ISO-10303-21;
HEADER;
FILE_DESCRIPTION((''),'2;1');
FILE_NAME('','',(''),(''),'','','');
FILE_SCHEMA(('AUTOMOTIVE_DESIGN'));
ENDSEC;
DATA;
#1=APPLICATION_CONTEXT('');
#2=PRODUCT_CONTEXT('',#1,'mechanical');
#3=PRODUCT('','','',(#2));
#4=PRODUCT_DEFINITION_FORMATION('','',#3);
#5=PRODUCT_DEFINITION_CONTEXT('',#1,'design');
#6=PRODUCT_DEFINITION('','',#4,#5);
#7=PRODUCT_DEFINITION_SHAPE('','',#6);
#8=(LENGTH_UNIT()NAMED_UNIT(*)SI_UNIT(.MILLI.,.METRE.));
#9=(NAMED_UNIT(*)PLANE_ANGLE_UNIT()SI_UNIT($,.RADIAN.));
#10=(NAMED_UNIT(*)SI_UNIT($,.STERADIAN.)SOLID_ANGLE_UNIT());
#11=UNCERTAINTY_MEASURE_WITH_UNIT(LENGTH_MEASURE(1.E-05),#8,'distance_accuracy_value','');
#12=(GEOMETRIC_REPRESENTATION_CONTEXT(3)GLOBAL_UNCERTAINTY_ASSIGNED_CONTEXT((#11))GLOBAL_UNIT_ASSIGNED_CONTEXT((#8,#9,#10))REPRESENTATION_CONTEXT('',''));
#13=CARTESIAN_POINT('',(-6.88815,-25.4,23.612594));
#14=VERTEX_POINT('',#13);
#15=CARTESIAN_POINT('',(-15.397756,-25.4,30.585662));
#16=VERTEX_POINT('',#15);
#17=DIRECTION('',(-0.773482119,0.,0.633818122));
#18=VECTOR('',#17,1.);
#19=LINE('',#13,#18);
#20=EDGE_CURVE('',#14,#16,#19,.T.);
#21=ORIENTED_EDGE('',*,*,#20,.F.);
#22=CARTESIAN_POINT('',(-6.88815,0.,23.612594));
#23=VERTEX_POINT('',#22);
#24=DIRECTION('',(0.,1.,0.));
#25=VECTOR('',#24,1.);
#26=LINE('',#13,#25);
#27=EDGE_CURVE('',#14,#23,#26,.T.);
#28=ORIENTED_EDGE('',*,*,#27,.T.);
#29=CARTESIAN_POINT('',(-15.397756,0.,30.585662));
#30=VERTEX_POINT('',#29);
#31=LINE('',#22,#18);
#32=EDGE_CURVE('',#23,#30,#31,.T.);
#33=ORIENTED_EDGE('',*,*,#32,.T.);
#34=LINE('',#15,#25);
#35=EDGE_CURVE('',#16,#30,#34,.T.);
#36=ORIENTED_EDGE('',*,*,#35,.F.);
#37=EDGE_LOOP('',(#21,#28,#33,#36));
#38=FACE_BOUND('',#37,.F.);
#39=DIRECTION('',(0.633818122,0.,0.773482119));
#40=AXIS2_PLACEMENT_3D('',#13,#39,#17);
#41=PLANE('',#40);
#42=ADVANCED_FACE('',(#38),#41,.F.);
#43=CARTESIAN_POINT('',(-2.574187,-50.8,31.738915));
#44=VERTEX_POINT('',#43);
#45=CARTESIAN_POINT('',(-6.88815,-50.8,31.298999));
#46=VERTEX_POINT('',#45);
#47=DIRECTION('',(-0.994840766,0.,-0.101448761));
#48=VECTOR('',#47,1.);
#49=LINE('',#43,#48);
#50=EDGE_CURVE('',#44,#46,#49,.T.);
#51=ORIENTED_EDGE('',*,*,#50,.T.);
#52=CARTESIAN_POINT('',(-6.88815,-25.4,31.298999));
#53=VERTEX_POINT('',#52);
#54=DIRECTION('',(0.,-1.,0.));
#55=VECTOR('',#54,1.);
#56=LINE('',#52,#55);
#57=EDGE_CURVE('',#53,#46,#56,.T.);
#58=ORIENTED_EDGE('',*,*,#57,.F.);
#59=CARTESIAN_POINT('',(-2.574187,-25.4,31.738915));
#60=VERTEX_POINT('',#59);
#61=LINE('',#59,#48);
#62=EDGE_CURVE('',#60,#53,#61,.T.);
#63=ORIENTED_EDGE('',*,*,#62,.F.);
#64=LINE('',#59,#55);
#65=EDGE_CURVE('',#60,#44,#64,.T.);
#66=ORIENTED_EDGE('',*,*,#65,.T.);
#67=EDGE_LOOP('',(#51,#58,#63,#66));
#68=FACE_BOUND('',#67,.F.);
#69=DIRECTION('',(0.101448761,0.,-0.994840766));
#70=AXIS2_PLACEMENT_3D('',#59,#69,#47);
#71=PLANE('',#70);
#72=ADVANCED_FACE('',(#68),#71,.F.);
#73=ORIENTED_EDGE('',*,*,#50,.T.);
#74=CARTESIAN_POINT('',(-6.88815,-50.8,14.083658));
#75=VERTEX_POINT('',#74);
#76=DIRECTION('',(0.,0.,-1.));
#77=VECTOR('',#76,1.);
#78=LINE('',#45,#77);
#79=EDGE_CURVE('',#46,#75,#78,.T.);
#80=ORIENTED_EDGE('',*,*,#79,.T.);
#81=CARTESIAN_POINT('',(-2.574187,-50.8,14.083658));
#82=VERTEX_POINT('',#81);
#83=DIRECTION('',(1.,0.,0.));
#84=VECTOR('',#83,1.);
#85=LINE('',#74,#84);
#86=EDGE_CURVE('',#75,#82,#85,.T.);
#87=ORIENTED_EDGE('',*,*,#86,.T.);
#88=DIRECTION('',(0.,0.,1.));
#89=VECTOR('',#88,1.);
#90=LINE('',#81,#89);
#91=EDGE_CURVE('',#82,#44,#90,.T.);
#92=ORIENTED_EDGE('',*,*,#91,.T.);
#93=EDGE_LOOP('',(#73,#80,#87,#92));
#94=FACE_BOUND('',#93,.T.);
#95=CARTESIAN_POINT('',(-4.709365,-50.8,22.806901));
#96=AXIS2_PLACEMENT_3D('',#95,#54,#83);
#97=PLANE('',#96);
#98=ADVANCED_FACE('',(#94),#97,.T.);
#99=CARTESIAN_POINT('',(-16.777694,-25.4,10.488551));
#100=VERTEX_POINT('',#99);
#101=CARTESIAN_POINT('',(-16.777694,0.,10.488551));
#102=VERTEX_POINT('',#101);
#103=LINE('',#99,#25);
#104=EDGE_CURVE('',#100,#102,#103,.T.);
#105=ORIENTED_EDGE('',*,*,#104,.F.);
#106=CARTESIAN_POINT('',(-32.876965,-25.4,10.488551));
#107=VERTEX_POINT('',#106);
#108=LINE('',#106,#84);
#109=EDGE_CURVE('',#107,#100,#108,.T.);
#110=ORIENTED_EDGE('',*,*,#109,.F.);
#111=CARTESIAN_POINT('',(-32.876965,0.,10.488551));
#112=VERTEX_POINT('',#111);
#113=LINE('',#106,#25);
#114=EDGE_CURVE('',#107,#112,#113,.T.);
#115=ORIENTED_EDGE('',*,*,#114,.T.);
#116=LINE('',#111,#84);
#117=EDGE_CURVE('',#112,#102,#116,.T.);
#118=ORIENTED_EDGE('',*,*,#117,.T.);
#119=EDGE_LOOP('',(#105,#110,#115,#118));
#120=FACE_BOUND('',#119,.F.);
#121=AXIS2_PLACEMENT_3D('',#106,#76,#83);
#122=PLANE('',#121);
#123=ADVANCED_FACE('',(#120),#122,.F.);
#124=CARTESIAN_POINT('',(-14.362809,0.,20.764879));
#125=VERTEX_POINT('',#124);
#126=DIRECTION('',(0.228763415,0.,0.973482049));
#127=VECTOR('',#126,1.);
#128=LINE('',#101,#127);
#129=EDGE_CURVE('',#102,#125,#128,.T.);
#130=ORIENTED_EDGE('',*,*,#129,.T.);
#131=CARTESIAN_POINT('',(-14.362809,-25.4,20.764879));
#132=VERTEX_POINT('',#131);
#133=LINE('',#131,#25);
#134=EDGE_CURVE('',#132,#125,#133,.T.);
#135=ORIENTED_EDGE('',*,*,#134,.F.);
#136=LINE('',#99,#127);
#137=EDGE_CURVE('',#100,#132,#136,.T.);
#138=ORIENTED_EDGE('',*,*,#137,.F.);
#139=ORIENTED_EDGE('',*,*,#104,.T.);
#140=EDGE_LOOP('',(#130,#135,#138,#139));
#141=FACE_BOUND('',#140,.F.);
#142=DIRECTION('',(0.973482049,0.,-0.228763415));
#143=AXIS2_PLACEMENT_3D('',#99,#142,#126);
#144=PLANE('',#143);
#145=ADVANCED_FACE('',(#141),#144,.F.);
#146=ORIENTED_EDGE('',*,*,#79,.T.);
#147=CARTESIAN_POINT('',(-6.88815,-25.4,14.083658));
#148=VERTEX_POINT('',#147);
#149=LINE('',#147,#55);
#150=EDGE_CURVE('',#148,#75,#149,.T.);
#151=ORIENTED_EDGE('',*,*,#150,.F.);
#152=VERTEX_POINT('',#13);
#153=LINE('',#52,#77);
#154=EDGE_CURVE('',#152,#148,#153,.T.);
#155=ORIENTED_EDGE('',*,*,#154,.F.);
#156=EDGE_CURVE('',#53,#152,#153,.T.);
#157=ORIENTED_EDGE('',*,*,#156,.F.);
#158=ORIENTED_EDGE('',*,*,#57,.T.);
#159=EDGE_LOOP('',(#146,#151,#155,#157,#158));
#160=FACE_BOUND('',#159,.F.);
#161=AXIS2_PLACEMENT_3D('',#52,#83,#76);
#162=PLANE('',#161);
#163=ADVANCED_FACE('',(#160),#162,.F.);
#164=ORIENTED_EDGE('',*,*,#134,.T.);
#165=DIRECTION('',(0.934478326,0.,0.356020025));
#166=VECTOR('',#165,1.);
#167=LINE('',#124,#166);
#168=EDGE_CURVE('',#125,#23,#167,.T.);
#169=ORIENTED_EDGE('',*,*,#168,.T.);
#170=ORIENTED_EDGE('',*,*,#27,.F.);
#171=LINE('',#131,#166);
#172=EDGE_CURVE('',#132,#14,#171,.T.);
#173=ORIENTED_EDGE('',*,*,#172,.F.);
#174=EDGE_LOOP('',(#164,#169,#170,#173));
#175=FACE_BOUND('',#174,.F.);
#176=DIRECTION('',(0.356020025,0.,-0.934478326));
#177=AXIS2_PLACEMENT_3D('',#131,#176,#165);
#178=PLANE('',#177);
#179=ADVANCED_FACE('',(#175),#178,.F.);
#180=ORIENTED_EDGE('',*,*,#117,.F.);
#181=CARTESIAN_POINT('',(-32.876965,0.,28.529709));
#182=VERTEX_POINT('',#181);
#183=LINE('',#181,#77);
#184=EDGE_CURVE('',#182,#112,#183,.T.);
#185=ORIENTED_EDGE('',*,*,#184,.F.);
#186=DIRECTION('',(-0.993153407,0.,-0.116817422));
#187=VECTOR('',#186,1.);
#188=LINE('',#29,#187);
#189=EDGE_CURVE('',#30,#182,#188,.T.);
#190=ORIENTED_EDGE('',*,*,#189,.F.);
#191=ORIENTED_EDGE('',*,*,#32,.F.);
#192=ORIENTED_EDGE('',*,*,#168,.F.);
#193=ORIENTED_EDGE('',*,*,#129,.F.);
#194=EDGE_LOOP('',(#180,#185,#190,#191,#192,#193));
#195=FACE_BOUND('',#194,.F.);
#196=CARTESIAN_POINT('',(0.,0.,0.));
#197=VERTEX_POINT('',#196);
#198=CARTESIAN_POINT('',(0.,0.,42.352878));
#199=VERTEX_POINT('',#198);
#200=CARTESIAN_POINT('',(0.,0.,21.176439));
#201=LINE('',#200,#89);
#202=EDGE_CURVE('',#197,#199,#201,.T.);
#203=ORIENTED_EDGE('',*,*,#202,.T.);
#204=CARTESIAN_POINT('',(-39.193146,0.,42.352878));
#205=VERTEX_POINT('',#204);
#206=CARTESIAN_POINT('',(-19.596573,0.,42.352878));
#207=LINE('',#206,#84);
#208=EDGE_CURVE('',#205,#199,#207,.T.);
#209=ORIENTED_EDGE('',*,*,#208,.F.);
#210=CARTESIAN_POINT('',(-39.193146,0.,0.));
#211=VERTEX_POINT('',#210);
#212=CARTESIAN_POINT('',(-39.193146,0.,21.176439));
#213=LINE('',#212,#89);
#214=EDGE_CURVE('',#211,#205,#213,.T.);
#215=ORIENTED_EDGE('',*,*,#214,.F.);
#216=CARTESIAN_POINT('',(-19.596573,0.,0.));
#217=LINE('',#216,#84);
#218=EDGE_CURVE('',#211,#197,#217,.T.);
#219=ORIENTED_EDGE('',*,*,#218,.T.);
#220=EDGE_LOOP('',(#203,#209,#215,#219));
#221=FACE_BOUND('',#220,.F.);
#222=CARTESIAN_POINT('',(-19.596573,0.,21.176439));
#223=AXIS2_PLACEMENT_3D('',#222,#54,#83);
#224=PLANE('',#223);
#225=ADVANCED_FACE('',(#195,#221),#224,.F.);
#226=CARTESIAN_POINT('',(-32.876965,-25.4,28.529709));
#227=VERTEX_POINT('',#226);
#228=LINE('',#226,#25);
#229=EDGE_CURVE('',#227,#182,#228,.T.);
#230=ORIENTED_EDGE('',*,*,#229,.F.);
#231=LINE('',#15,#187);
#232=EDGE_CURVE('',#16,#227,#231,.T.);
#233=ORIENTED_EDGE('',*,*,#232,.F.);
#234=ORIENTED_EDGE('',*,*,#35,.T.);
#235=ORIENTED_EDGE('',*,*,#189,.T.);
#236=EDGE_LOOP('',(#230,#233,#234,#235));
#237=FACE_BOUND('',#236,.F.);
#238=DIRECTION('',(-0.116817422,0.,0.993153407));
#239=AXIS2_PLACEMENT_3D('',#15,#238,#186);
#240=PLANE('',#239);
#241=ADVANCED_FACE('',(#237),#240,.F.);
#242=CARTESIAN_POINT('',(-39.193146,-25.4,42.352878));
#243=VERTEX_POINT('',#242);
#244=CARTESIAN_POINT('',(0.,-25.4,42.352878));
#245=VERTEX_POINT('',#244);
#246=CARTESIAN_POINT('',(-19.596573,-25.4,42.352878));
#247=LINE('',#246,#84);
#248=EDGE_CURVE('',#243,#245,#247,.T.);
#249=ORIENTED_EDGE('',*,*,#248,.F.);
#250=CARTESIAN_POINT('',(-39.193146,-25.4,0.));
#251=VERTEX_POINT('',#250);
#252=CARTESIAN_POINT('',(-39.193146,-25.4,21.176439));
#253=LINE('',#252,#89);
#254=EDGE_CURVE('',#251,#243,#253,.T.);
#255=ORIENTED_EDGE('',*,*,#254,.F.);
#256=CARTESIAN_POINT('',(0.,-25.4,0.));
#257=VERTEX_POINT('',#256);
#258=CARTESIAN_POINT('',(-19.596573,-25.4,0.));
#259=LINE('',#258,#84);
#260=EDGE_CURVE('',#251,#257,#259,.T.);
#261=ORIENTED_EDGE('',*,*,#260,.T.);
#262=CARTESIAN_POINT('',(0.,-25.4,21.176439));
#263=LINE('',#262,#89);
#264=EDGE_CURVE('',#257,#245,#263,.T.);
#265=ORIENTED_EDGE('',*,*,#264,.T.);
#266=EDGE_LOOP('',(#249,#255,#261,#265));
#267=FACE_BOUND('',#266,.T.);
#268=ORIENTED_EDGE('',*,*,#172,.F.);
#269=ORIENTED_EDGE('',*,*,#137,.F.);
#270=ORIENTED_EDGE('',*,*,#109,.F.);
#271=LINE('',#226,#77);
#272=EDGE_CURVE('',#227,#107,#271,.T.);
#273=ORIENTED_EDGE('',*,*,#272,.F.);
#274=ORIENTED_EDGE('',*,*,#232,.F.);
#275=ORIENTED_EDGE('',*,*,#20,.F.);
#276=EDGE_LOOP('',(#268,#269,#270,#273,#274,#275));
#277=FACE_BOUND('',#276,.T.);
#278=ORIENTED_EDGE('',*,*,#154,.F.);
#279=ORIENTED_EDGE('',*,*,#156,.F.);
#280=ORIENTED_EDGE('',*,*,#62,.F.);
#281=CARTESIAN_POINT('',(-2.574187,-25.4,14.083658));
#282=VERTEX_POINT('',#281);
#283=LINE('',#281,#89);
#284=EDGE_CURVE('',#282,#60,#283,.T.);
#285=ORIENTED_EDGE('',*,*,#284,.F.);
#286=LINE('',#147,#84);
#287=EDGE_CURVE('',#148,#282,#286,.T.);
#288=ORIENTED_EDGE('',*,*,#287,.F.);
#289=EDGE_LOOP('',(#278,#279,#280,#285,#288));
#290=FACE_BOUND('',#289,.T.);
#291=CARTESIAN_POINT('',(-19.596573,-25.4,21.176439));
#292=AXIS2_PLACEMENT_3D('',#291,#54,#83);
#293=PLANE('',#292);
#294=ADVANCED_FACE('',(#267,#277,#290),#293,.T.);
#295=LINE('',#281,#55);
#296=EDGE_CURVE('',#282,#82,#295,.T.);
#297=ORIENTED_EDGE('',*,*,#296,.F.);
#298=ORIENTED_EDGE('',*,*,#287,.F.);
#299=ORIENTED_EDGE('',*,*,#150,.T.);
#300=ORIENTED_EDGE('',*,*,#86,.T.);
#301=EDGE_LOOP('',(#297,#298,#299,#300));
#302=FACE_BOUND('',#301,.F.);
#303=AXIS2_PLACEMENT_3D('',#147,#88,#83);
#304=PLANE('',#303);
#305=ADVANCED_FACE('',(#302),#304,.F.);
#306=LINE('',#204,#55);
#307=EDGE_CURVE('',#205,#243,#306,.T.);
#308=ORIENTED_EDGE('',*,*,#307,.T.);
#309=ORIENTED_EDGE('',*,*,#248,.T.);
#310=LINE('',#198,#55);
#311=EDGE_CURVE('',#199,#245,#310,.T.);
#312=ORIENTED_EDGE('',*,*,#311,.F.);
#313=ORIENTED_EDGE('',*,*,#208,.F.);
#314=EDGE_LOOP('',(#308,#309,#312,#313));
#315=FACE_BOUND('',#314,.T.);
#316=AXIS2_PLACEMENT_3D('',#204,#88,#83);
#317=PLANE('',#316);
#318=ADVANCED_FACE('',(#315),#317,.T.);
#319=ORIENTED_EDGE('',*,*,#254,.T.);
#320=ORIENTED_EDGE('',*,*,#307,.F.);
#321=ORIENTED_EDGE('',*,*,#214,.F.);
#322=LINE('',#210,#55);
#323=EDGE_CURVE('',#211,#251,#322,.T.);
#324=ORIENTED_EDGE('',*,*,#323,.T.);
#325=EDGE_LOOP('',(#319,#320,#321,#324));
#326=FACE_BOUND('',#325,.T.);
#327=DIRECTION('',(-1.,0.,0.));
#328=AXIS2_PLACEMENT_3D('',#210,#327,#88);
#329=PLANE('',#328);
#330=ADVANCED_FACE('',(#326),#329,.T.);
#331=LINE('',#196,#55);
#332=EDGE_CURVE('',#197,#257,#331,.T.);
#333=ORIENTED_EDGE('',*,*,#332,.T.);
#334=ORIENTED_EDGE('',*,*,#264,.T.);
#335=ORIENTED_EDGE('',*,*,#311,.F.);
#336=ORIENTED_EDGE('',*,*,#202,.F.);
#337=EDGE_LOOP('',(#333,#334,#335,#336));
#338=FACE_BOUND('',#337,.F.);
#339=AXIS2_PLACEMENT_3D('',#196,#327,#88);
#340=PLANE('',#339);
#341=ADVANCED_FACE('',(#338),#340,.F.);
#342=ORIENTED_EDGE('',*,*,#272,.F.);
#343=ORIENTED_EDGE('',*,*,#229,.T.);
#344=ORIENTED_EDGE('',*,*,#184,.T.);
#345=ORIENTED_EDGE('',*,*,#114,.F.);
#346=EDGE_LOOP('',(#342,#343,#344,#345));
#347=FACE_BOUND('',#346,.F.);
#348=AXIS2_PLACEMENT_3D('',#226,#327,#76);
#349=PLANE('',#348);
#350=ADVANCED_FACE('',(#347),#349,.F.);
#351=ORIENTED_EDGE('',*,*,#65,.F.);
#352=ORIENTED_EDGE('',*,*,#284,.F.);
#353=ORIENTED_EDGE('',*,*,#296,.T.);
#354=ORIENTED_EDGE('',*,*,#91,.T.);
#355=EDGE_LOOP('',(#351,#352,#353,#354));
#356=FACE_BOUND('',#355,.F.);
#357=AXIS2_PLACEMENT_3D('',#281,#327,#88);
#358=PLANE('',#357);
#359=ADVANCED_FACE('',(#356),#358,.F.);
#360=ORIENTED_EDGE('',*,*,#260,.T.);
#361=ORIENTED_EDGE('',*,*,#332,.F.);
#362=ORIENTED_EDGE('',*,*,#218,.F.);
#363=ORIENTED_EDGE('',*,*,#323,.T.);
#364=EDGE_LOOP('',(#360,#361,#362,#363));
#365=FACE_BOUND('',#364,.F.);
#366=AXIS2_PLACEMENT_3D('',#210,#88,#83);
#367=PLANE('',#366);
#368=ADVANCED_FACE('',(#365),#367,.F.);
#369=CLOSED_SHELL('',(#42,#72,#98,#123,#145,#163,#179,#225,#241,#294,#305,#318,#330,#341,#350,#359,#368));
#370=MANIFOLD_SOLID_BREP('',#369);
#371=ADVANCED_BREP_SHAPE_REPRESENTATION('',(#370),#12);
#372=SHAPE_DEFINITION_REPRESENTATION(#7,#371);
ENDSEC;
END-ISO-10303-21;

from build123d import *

# Parameters (mm, degrees)
F0_W     = 39.1931459308
F0_H     = 42.3528775573
F1_DEPTH = 25.4
F3_DEPTH = 25.4
F5_DEPTH = 25.4


# Not quite as in the source:
# - ends of sketch curves that miss each other by under 0.0002 mm in the source are joined
# - a feature of the source that left no trace in its solid (it failed there, or was rolled back) is left out


with BuildPart() as f1:
    # F0 (on Front) → F1 (new body)
    with BuildSketch(Plane.XZ):
        with Locations((-19.5965729654, 21.1764387786)):
            Rectangle(F0_W, F0_H)
    extrude(amount=F1_DEPTH)

    # F2 (on face) → F3 (cut)
    with BuildSketch(Plane.XZ.offset(25.4)):
        Polygon((-6.8881497718, 23.612594232), (-15.3977563605, 30.5856615305), (-32.8769646585, 28.529709205), (-32.8769646585, 10.48855111), (-16.7776942253, 10.48855111), (-14.3628085498, 20.764878951), align=None)
        Polygon((-21.8374673277, 17.9171636701), (-14.3628085498, 20.764878951), (-20.9175087512, 15.6267150305), align=None, mode=Mode.SUBTRACT)
        Polygon((-20.9175087512, 15.6267150305), (-14.3628085498, 20.764878951), (-21.8374673277, 17.9171636701), align=None)
    extrude(amount=-F3_DEPTH, mode=Mode.SUBTRACT)

    # F4 (on face) → F5 (join)
    with BuildSketch(Plane.XZ.offset(25.4)):
        Polygon((-6.8881497718, 31.2989987433), (-6.8881497718, 23.612594232), (-6.8881497718, 14.083658345), (-2.5741870049, 14.083658345), (-2.5741870049, 31.7389145494), align=None)
    extrude(amount=F5_DEPTH)


solid = f1.part
